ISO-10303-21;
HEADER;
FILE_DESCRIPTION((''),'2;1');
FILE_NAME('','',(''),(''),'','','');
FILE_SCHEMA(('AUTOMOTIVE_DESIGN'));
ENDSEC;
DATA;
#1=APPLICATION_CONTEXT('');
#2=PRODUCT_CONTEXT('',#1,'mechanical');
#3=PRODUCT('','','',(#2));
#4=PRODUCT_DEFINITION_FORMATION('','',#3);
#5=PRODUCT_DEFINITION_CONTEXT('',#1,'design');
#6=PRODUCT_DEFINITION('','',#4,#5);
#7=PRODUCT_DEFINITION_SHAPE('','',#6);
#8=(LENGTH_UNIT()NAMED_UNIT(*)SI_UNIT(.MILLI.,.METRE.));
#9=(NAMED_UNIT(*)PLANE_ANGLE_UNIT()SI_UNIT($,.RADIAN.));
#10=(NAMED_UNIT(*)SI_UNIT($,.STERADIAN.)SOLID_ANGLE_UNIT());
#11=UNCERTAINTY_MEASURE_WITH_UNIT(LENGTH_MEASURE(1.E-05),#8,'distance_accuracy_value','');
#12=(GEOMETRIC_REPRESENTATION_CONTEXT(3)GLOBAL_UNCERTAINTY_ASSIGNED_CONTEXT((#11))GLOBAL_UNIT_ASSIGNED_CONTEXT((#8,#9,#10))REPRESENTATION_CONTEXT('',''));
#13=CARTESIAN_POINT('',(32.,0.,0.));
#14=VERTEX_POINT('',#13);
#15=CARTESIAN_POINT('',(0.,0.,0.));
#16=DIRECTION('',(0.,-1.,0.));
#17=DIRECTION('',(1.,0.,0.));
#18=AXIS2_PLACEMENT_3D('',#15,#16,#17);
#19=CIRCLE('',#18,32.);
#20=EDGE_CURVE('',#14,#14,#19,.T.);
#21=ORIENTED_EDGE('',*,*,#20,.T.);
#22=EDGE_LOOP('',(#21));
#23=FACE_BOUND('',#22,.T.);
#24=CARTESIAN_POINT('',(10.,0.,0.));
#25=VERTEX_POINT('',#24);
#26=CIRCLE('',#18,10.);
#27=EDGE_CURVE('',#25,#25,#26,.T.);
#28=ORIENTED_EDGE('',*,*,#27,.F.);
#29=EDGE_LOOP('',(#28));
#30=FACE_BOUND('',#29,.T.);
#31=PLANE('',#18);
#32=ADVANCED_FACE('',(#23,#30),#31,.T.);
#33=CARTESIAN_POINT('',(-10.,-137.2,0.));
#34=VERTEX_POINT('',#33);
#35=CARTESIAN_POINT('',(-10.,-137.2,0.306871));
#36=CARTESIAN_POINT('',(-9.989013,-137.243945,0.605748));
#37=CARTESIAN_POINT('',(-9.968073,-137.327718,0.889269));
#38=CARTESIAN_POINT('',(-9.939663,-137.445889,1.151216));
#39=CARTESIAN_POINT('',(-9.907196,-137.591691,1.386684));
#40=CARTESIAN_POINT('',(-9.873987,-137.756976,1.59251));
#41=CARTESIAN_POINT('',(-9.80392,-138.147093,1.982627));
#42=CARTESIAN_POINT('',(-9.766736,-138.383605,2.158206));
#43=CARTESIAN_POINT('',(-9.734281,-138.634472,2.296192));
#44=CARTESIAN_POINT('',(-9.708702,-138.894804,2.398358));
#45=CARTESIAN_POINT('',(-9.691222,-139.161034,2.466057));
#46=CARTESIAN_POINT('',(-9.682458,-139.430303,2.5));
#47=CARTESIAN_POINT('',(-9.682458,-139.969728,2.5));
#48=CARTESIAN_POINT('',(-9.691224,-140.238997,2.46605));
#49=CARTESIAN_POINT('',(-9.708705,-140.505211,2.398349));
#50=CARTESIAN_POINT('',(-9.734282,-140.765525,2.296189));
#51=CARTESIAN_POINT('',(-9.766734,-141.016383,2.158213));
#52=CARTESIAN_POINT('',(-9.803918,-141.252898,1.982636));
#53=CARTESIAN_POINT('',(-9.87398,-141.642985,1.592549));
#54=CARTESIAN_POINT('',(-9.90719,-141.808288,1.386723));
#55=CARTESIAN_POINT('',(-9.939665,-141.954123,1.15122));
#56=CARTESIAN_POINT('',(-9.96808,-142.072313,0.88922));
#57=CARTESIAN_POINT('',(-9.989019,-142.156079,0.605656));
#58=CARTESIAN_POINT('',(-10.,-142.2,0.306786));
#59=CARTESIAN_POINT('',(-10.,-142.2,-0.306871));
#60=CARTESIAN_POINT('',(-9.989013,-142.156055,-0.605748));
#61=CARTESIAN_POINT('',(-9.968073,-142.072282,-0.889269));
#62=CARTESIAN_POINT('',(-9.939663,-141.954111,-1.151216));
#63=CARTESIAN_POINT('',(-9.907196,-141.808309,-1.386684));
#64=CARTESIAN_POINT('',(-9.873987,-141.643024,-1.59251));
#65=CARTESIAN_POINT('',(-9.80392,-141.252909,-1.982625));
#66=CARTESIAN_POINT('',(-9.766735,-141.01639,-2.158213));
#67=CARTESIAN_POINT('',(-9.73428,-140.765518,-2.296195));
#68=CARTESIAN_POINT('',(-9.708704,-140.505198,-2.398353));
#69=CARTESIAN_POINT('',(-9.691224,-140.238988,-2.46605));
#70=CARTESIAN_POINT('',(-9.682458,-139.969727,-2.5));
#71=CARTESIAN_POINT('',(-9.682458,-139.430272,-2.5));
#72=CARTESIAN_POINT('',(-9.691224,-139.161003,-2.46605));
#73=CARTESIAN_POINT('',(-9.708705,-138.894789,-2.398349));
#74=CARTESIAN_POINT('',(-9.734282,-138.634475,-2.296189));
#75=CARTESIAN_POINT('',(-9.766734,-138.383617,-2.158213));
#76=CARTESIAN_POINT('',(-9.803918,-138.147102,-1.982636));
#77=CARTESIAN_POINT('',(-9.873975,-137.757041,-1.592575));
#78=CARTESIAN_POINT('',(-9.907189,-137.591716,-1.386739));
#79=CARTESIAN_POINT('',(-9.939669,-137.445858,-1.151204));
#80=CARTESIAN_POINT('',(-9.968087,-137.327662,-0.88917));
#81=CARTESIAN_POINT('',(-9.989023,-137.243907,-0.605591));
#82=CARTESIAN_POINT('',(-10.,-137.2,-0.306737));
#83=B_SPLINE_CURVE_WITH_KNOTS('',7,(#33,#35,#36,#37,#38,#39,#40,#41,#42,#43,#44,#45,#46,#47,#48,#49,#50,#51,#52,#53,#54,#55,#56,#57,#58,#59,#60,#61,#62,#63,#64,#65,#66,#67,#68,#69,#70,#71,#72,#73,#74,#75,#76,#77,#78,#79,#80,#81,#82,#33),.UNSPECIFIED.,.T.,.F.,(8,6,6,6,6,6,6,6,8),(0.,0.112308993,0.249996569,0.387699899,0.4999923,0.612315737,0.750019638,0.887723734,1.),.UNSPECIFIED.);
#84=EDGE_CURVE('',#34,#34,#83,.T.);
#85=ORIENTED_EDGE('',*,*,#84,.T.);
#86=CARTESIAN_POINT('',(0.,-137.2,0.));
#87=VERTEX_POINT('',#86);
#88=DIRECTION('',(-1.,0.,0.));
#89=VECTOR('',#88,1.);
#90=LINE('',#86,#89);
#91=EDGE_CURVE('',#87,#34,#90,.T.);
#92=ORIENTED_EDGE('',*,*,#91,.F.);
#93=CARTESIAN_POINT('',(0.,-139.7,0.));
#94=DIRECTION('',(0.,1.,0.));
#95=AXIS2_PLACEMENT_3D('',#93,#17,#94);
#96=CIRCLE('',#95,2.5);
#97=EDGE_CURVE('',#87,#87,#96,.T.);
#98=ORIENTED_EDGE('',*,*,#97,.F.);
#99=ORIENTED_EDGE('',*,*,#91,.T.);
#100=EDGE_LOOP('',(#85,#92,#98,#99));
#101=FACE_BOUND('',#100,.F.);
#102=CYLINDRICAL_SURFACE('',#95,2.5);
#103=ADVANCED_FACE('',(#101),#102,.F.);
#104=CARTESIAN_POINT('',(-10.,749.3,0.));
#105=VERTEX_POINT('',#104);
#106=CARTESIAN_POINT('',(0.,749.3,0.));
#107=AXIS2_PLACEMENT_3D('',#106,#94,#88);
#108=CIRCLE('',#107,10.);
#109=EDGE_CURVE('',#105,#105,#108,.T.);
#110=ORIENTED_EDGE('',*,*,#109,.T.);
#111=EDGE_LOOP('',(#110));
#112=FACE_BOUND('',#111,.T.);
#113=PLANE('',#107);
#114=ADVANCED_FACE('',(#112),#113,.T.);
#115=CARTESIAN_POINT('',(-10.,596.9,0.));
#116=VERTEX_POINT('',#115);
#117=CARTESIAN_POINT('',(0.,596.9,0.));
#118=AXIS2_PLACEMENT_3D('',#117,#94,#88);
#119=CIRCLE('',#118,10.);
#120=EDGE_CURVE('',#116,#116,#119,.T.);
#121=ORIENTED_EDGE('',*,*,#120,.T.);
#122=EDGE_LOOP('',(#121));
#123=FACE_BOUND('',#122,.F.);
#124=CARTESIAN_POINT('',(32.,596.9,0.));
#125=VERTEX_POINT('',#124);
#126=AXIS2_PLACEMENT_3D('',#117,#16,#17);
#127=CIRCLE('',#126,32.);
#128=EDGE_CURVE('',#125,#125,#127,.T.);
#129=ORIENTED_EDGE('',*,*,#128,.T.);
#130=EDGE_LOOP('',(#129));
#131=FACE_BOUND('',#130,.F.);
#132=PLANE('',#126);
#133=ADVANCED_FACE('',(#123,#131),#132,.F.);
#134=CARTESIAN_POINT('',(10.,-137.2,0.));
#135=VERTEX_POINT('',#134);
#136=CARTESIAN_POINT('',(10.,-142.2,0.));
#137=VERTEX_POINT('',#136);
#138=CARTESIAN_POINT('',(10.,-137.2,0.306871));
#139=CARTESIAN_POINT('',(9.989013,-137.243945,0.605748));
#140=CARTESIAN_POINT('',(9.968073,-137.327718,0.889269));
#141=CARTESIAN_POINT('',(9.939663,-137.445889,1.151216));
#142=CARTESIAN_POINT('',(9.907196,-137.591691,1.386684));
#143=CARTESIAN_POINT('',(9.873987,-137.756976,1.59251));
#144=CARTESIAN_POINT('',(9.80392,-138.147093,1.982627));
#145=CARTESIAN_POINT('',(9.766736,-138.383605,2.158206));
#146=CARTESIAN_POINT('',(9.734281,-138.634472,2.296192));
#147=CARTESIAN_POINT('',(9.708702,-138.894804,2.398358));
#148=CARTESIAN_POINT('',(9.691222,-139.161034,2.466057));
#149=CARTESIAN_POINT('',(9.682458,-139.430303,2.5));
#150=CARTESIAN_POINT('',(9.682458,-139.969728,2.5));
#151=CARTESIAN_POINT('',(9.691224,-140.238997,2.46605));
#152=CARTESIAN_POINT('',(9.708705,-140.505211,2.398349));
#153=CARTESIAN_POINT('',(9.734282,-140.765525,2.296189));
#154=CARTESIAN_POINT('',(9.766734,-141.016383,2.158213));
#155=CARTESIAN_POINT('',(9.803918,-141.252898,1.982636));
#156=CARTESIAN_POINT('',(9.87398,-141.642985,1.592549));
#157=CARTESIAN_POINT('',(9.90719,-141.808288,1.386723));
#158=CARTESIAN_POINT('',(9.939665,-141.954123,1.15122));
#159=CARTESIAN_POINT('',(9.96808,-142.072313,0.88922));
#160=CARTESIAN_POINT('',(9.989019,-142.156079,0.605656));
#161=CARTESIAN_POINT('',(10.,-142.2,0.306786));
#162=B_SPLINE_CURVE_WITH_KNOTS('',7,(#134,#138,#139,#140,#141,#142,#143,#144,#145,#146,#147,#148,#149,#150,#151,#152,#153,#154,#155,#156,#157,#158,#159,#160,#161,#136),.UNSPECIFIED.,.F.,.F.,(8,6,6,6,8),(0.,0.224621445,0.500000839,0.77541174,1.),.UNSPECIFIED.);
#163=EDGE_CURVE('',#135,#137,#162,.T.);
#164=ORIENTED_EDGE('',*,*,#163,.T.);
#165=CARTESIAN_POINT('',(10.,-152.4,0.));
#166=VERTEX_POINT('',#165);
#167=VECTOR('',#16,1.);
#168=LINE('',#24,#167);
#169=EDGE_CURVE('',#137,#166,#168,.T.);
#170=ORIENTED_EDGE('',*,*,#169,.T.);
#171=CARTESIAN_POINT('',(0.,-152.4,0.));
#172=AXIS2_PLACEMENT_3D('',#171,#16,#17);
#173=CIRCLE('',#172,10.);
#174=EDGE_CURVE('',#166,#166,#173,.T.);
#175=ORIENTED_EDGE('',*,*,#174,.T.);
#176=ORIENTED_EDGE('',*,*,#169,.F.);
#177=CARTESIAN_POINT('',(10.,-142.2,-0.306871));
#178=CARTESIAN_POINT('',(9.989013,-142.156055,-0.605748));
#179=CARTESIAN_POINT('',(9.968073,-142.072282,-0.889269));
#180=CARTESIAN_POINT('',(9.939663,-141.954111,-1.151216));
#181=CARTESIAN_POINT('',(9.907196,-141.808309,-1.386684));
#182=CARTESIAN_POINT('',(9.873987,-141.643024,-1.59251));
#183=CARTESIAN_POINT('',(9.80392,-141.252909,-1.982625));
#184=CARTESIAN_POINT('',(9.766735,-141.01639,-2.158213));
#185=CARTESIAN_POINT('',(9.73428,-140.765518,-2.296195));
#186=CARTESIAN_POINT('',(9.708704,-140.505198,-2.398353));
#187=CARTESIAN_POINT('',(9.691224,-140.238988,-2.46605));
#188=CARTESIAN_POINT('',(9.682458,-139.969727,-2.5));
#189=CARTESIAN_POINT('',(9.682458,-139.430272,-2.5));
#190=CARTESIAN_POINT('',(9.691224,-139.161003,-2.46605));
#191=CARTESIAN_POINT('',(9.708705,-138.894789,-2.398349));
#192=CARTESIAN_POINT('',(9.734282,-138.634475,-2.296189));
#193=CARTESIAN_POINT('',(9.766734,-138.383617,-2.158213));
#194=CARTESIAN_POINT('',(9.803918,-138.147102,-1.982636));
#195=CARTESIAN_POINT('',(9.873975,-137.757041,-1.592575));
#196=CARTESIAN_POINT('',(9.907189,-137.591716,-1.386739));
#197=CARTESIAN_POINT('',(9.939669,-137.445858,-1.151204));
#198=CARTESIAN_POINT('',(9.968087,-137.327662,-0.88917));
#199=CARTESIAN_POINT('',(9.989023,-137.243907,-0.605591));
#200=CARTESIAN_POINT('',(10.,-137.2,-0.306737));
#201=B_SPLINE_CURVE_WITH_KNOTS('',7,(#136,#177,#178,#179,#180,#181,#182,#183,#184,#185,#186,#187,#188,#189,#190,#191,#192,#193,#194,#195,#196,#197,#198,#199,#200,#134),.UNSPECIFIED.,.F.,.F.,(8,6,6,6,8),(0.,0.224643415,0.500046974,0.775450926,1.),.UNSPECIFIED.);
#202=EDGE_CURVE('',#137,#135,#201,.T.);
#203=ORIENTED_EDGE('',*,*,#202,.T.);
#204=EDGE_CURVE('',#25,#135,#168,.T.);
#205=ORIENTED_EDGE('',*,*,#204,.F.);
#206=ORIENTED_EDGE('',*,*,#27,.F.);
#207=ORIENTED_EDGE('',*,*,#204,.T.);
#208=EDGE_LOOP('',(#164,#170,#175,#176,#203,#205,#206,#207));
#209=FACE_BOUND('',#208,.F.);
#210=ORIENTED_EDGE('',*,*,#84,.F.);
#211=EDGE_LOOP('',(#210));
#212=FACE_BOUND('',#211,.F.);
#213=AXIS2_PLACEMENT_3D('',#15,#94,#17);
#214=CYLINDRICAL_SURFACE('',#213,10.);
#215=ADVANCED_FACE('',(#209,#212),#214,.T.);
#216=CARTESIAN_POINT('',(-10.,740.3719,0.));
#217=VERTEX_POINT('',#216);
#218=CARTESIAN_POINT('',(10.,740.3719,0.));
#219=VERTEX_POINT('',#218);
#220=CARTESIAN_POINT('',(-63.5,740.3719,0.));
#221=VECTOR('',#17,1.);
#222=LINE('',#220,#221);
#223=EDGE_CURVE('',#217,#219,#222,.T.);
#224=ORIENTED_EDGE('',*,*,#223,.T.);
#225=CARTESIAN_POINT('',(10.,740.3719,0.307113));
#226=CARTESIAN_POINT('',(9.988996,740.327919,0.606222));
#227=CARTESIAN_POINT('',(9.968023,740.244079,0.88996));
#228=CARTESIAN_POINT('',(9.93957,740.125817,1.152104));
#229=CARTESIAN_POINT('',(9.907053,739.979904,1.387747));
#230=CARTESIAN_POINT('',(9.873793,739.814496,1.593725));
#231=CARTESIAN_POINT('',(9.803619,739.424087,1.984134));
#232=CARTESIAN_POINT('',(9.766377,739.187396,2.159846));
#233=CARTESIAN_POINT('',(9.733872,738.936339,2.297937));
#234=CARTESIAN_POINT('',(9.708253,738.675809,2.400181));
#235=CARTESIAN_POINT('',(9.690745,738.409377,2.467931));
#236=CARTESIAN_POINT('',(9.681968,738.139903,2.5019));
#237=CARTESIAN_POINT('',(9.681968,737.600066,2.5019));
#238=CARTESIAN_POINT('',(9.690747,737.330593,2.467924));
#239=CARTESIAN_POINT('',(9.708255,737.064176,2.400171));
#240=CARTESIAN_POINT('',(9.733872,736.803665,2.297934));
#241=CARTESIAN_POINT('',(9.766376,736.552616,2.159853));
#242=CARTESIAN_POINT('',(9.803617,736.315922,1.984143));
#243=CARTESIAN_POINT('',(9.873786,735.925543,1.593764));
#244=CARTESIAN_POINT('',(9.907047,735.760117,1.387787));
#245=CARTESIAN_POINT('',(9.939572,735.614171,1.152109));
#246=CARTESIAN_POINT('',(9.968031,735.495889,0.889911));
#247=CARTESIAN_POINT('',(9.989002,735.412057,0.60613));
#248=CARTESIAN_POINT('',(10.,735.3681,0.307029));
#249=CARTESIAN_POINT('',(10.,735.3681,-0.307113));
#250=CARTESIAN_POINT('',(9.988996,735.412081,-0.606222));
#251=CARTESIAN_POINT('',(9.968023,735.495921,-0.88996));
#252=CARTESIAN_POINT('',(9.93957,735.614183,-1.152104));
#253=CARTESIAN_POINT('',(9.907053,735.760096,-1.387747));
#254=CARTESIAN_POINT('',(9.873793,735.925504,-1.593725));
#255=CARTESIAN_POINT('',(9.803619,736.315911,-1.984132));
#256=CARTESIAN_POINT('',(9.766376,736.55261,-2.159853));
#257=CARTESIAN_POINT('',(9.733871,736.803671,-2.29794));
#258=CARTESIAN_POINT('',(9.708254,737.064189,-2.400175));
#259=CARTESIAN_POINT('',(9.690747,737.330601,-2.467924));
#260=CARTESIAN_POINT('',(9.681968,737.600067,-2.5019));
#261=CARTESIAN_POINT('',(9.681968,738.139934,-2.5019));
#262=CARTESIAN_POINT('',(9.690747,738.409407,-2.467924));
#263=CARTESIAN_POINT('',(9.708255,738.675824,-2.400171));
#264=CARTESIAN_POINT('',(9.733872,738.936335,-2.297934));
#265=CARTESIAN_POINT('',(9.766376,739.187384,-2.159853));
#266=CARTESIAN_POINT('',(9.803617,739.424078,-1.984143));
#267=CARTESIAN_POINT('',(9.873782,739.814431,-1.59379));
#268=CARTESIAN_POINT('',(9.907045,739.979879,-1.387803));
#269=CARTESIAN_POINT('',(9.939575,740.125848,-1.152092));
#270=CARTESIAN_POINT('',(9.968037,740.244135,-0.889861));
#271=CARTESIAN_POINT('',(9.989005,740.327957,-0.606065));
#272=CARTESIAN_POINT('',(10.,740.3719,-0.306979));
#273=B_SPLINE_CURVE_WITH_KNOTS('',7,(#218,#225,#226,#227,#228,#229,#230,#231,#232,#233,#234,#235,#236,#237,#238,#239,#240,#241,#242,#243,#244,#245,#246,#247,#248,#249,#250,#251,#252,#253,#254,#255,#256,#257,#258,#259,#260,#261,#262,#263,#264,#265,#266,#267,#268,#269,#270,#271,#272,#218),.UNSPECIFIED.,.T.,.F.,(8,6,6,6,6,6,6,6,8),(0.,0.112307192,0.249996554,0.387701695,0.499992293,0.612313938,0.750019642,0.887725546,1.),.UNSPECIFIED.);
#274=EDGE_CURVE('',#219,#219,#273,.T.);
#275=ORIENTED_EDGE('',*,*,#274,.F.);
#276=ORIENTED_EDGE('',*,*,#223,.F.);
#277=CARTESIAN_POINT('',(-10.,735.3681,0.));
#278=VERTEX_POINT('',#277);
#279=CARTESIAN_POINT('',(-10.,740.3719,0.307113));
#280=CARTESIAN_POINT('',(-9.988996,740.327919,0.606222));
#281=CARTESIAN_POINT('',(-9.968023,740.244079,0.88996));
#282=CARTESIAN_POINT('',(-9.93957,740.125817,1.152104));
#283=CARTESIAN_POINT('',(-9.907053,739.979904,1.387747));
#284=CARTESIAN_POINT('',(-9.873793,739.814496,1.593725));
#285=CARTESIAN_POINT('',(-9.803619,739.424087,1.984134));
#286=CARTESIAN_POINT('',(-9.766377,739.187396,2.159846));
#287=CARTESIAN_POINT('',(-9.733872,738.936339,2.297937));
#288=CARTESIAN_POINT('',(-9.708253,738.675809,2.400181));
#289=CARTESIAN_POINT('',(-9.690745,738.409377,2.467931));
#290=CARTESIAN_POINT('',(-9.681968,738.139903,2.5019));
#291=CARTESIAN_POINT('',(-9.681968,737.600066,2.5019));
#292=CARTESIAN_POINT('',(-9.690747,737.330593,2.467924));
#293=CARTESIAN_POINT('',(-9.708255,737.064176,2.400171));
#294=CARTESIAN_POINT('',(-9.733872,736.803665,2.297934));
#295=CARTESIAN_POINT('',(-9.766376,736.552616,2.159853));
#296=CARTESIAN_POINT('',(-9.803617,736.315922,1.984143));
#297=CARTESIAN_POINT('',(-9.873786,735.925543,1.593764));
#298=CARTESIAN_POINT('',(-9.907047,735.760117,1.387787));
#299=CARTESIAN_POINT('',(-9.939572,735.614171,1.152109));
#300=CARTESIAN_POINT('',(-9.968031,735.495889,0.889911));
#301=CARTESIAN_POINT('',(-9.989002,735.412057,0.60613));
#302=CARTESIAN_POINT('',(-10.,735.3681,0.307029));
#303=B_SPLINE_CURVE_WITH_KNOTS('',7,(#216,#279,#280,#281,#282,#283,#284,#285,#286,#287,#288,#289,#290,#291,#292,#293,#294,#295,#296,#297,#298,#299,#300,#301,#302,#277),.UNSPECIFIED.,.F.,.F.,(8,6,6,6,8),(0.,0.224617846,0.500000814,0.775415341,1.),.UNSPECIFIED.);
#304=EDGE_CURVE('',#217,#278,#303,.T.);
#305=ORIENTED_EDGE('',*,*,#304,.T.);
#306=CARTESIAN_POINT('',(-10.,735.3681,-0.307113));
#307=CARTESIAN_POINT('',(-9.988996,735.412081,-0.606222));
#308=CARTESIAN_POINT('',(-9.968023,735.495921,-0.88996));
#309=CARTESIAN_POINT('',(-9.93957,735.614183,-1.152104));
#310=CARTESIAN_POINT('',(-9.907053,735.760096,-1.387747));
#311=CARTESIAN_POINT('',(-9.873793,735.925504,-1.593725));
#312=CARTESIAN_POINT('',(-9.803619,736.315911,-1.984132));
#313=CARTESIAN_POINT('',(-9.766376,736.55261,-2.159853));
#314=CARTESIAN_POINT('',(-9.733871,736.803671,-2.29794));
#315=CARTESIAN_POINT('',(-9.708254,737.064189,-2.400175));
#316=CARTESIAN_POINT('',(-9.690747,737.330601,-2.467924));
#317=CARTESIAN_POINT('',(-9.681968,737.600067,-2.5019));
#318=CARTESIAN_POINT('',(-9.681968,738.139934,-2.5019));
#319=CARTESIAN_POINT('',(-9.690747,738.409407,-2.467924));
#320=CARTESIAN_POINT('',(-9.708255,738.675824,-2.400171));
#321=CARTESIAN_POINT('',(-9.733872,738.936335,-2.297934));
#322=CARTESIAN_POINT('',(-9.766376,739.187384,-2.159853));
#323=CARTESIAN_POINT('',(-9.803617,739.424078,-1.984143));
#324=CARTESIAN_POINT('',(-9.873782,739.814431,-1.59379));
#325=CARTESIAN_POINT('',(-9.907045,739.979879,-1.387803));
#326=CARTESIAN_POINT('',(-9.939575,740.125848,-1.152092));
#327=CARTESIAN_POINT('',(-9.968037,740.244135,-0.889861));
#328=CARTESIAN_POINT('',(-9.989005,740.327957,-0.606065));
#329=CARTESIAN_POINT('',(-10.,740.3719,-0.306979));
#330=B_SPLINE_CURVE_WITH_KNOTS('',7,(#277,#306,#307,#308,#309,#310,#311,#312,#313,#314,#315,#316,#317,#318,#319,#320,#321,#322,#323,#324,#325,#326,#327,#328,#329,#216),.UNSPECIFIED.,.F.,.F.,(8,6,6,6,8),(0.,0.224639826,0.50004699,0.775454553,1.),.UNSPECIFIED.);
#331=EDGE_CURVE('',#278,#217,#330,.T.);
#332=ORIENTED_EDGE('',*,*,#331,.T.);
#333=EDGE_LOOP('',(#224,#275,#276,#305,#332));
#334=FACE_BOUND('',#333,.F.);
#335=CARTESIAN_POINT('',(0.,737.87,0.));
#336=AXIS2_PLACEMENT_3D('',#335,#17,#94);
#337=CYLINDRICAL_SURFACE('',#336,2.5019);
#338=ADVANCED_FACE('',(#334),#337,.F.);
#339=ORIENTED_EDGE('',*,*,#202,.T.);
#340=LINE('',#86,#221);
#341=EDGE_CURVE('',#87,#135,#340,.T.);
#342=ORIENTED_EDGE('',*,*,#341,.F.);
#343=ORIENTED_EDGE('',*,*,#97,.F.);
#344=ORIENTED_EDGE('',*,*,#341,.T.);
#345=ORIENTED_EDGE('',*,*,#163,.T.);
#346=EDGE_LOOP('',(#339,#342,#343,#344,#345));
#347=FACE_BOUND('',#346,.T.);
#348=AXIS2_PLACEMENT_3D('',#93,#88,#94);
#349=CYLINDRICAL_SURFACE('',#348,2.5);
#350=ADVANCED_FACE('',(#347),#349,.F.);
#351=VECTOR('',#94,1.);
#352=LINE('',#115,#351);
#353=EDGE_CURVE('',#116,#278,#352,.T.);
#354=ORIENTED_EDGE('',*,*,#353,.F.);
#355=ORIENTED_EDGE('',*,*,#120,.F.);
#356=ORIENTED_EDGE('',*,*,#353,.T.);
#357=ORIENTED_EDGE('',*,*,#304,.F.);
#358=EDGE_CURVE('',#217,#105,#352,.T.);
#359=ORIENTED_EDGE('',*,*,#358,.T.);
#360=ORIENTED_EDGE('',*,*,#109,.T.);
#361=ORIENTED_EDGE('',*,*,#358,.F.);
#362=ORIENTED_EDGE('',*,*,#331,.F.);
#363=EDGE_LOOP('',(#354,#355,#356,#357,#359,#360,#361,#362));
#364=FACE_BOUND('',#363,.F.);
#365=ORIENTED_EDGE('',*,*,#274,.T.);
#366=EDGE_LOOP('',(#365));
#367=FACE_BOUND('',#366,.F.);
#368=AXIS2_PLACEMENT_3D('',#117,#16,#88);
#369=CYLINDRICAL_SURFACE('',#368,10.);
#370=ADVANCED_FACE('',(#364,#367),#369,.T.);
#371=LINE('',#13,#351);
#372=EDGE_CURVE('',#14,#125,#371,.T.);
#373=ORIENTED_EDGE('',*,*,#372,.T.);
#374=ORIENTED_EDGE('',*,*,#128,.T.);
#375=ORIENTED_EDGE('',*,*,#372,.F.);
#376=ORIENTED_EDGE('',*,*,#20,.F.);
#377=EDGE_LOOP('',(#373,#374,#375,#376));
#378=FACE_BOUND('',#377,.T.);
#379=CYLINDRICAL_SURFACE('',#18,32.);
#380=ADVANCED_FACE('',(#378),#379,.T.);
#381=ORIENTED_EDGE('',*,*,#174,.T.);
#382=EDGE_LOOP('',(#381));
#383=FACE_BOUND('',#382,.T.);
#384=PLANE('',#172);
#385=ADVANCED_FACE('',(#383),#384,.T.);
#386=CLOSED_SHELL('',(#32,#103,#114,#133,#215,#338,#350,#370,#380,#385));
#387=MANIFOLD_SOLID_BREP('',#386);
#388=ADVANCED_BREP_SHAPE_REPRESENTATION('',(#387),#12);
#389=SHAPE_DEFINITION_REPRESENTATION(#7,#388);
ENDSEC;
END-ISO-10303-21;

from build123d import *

# Parameters (mm, degrees)
F0_R     = 32
F0_R_2   = 10
F1_DEPTH = 596.9
F2_DEPTH = 152.4
F3_R     = 10
F4_DEPTH = 152.4
F5_R     = 2.5
F5_R_2   = 2.5019
F6_DEPTH = 63.5


# Not quite as in the source:
# - a feature names something its author has since deleted; it is built from what else it names


with BuildPart() as f1:
    # F0 (on Front) → F1 (new body)
    with BuildSketch(Plane.XZ):
        Circle(F0_R)
        Circle(F0_R_2, mode=Mode.SUBTRACT)
        Circle(F0_R_2)
    extrude(amount=-F1_DEPTH)

    # F0 (on Front) → F2 (join)
    with BuildSketch(Plane.XZ):
        Circle(F0_R_2)
    extrude(amount=F2_DEPTH)

    # F3 (on face) → F4 (join)
    with BuildSketch(Plane(origin=(0, 596.9, 0), x_dir=(-1, 0, 0), z_dir=(0, 1, 0))):
        Circle(F3_R)
    extrude(amount=F4_DEPTH)

    # F5 (on Right) → F6 (cut, symmetric)
    with BuildSketch(Plane.YZ):
        with Locations((-139.7, 0)):
            Circle(F5_R)
        with Locations((737.87, 0)):
            Circle(F5_R_2)
    extrude(amount=F6_DEPTH, both=True, mode=Mode.SUBTRACT)


solid = f1.part
